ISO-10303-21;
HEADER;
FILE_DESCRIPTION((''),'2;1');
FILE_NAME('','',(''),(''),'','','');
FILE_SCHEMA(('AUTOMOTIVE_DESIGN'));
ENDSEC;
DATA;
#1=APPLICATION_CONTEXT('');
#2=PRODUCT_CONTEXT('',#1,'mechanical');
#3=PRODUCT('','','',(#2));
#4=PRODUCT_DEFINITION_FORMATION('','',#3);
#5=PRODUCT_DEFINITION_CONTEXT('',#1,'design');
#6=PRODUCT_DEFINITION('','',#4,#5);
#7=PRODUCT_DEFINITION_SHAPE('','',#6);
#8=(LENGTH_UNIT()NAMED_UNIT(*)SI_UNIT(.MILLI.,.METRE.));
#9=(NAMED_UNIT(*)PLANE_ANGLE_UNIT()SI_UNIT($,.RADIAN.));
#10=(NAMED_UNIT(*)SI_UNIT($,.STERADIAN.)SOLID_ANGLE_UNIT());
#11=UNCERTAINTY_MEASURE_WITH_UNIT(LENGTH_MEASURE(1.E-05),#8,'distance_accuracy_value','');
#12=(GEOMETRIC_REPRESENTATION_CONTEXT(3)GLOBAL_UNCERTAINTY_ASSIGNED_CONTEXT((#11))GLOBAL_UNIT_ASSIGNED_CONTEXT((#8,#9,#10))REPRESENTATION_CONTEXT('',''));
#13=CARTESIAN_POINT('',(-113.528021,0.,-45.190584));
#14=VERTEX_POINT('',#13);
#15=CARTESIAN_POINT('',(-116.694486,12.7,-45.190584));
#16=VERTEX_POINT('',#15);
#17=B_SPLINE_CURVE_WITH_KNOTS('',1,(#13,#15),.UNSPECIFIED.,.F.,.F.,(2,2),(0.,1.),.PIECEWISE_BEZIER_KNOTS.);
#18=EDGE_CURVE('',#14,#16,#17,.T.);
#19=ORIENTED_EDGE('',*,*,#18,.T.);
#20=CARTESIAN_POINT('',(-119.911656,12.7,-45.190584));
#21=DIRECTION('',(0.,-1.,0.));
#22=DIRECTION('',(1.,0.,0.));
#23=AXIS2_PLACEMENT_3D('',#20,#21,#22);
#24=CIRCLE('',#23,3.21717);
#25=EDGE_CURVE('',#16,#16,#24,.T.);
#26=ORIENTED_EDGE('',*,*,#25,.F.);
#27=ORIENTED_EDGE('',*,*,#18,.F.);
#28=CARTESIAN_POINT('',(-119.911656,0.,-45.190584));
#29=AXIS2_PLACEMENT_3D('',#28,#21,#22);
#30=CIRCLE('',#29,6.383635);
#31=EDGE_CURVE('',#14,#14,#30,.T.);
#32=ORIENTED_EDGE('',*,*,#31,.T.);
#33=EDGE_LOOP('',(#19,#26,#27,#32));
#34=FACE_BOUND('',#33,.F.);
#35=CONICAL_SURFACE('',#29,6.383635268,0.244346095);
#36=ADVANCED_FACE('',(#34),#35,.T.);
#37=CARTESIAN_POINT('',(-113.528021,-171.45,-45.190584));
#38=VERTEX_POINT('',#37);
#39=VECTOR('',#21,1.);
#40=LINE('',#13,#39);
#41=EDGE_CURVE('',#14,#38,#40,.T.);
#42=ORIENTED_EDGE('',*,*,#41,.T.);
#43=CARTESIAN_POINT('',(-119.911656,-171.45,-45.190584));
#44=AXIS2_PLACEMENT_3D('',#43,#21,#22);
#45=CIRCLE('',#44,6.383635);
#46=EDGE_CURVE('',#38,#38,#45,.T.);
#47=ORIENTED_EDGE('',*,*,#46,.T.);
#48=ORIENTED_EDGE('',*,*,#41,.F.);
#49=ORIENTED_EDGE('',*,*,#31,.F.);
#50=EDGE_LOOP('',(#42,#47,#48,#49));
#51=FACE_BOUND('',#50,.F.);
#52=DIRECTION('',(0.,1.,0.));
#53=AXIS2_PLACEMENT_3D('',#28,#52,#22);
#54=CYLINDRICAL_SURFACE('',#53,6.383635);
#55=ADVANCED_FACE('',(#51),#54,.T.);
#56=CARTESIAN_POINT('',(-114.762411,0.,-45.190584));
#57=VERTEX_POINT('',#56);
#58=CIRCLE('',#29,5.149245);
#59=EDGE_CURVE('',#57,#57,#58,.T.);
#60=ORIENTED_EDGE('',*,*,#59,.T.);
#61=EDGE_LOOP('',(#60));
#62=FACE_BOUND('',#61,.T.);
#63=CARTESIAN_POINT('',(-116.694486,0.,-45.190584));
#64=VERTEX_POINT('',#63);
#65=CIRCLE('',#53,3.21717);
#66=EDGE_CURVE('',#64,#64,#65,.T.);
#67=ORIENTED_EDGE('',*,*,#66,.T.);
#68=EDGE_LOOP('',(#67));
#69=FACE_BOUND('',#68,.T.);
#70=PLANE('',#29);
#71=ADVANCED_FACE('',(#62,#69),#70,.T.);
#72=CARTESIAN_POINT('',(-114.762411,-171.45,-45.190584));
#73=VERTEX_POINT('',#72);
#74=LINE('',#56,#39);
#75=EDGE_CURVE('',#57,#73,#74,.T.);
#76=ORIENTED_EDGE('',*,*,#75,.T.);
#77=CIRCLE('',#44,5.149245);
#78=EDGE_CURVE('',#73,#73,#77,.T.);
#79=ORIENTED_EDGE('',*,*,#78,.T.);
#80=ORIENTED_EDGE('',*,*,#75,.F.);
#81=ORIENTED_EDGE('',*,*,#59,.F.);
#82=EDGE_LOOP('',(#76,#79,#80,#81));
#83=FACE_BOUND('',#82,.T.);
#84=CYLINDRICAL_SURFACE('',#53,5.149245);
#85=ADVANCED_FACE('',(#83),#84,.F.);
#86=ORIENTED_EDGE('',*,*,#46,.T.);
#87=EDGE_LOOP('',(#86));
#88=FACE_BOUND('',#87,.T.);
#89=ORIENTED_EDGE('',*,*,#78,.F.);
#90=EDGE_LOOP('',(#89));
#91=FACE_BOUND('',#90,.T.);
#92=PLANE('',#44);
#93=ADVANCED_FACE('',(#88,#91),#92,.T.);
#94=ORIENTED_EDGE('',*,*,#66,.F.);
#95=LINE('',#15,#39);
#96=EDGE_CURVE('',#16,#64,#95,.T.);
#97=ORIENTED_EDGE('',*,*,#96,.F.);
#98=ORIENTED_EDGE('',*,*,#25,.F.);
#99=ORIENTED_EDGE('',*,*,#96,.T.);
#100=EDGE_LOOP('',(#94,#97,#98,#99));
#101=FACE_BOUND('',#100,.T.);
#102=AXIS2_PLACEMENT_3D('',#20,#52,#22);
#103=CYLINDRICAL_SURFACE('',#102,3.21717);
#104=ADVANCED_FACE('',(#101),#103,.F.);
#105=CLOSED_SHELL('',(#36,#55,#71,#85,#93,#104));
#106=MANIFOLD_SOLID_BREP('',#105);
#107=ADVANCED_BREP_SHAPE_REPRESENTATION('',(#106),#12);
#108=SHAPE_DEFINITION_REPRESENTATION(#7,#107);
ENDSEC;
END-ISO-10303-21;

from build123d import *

# Parameters (mm, degrees)
F0_R     = 6.3836352682
F1_DEPTH = 171.45
F4_R     = 5.1492450533
F5_DEPTH = 171.45
F6_DEPTH = 12.7
F6_TAPER = 14
F8_DEPTH = 25.654


# Not quite as in the source:
# - the program builds the solid bodies; features that only make, move or delete a surface that nothing else refers to are left out


with BuildPart() as f1:
    # F0 (on Front) → F1 (new body)
    with BuildSketch(Plane.XZ):
        with Locations((-119.9116557837, -45.1905839145)):
            Circle(F0_R)
    extrude(amount=F1_DEPTH)

    # F4 (on Front) → F5 (cut)
    with BuildSketch(Plane.XZ):
        with Locations((-119.9116557837, -45.1905839145)):
            Circle(F4_R)
    extrude(amount=F5_DEPTH, mode=Mode.SUBTRACT)

    # F0 (on Front) → F6 (join)
    with BuildSketch(Plane.XZ):
        with Locations((-119.9116557837, -45.1905839145)):
            Circle(F0_R)
    extrude(amount=-F6_DEPTH, taper=F6_TAPER)

    # F8 (cut): a face of the model
    f8_faces = [f1.faces().sort_by_distance(p)[0] for p in [
        (-119.9116557837, 12.7, -45.1905839145),
    ]]
    extrude(f8_faces, amount=-F8_DEPTH, mode=Mode.SUBTRACT)


solid = f1.part
